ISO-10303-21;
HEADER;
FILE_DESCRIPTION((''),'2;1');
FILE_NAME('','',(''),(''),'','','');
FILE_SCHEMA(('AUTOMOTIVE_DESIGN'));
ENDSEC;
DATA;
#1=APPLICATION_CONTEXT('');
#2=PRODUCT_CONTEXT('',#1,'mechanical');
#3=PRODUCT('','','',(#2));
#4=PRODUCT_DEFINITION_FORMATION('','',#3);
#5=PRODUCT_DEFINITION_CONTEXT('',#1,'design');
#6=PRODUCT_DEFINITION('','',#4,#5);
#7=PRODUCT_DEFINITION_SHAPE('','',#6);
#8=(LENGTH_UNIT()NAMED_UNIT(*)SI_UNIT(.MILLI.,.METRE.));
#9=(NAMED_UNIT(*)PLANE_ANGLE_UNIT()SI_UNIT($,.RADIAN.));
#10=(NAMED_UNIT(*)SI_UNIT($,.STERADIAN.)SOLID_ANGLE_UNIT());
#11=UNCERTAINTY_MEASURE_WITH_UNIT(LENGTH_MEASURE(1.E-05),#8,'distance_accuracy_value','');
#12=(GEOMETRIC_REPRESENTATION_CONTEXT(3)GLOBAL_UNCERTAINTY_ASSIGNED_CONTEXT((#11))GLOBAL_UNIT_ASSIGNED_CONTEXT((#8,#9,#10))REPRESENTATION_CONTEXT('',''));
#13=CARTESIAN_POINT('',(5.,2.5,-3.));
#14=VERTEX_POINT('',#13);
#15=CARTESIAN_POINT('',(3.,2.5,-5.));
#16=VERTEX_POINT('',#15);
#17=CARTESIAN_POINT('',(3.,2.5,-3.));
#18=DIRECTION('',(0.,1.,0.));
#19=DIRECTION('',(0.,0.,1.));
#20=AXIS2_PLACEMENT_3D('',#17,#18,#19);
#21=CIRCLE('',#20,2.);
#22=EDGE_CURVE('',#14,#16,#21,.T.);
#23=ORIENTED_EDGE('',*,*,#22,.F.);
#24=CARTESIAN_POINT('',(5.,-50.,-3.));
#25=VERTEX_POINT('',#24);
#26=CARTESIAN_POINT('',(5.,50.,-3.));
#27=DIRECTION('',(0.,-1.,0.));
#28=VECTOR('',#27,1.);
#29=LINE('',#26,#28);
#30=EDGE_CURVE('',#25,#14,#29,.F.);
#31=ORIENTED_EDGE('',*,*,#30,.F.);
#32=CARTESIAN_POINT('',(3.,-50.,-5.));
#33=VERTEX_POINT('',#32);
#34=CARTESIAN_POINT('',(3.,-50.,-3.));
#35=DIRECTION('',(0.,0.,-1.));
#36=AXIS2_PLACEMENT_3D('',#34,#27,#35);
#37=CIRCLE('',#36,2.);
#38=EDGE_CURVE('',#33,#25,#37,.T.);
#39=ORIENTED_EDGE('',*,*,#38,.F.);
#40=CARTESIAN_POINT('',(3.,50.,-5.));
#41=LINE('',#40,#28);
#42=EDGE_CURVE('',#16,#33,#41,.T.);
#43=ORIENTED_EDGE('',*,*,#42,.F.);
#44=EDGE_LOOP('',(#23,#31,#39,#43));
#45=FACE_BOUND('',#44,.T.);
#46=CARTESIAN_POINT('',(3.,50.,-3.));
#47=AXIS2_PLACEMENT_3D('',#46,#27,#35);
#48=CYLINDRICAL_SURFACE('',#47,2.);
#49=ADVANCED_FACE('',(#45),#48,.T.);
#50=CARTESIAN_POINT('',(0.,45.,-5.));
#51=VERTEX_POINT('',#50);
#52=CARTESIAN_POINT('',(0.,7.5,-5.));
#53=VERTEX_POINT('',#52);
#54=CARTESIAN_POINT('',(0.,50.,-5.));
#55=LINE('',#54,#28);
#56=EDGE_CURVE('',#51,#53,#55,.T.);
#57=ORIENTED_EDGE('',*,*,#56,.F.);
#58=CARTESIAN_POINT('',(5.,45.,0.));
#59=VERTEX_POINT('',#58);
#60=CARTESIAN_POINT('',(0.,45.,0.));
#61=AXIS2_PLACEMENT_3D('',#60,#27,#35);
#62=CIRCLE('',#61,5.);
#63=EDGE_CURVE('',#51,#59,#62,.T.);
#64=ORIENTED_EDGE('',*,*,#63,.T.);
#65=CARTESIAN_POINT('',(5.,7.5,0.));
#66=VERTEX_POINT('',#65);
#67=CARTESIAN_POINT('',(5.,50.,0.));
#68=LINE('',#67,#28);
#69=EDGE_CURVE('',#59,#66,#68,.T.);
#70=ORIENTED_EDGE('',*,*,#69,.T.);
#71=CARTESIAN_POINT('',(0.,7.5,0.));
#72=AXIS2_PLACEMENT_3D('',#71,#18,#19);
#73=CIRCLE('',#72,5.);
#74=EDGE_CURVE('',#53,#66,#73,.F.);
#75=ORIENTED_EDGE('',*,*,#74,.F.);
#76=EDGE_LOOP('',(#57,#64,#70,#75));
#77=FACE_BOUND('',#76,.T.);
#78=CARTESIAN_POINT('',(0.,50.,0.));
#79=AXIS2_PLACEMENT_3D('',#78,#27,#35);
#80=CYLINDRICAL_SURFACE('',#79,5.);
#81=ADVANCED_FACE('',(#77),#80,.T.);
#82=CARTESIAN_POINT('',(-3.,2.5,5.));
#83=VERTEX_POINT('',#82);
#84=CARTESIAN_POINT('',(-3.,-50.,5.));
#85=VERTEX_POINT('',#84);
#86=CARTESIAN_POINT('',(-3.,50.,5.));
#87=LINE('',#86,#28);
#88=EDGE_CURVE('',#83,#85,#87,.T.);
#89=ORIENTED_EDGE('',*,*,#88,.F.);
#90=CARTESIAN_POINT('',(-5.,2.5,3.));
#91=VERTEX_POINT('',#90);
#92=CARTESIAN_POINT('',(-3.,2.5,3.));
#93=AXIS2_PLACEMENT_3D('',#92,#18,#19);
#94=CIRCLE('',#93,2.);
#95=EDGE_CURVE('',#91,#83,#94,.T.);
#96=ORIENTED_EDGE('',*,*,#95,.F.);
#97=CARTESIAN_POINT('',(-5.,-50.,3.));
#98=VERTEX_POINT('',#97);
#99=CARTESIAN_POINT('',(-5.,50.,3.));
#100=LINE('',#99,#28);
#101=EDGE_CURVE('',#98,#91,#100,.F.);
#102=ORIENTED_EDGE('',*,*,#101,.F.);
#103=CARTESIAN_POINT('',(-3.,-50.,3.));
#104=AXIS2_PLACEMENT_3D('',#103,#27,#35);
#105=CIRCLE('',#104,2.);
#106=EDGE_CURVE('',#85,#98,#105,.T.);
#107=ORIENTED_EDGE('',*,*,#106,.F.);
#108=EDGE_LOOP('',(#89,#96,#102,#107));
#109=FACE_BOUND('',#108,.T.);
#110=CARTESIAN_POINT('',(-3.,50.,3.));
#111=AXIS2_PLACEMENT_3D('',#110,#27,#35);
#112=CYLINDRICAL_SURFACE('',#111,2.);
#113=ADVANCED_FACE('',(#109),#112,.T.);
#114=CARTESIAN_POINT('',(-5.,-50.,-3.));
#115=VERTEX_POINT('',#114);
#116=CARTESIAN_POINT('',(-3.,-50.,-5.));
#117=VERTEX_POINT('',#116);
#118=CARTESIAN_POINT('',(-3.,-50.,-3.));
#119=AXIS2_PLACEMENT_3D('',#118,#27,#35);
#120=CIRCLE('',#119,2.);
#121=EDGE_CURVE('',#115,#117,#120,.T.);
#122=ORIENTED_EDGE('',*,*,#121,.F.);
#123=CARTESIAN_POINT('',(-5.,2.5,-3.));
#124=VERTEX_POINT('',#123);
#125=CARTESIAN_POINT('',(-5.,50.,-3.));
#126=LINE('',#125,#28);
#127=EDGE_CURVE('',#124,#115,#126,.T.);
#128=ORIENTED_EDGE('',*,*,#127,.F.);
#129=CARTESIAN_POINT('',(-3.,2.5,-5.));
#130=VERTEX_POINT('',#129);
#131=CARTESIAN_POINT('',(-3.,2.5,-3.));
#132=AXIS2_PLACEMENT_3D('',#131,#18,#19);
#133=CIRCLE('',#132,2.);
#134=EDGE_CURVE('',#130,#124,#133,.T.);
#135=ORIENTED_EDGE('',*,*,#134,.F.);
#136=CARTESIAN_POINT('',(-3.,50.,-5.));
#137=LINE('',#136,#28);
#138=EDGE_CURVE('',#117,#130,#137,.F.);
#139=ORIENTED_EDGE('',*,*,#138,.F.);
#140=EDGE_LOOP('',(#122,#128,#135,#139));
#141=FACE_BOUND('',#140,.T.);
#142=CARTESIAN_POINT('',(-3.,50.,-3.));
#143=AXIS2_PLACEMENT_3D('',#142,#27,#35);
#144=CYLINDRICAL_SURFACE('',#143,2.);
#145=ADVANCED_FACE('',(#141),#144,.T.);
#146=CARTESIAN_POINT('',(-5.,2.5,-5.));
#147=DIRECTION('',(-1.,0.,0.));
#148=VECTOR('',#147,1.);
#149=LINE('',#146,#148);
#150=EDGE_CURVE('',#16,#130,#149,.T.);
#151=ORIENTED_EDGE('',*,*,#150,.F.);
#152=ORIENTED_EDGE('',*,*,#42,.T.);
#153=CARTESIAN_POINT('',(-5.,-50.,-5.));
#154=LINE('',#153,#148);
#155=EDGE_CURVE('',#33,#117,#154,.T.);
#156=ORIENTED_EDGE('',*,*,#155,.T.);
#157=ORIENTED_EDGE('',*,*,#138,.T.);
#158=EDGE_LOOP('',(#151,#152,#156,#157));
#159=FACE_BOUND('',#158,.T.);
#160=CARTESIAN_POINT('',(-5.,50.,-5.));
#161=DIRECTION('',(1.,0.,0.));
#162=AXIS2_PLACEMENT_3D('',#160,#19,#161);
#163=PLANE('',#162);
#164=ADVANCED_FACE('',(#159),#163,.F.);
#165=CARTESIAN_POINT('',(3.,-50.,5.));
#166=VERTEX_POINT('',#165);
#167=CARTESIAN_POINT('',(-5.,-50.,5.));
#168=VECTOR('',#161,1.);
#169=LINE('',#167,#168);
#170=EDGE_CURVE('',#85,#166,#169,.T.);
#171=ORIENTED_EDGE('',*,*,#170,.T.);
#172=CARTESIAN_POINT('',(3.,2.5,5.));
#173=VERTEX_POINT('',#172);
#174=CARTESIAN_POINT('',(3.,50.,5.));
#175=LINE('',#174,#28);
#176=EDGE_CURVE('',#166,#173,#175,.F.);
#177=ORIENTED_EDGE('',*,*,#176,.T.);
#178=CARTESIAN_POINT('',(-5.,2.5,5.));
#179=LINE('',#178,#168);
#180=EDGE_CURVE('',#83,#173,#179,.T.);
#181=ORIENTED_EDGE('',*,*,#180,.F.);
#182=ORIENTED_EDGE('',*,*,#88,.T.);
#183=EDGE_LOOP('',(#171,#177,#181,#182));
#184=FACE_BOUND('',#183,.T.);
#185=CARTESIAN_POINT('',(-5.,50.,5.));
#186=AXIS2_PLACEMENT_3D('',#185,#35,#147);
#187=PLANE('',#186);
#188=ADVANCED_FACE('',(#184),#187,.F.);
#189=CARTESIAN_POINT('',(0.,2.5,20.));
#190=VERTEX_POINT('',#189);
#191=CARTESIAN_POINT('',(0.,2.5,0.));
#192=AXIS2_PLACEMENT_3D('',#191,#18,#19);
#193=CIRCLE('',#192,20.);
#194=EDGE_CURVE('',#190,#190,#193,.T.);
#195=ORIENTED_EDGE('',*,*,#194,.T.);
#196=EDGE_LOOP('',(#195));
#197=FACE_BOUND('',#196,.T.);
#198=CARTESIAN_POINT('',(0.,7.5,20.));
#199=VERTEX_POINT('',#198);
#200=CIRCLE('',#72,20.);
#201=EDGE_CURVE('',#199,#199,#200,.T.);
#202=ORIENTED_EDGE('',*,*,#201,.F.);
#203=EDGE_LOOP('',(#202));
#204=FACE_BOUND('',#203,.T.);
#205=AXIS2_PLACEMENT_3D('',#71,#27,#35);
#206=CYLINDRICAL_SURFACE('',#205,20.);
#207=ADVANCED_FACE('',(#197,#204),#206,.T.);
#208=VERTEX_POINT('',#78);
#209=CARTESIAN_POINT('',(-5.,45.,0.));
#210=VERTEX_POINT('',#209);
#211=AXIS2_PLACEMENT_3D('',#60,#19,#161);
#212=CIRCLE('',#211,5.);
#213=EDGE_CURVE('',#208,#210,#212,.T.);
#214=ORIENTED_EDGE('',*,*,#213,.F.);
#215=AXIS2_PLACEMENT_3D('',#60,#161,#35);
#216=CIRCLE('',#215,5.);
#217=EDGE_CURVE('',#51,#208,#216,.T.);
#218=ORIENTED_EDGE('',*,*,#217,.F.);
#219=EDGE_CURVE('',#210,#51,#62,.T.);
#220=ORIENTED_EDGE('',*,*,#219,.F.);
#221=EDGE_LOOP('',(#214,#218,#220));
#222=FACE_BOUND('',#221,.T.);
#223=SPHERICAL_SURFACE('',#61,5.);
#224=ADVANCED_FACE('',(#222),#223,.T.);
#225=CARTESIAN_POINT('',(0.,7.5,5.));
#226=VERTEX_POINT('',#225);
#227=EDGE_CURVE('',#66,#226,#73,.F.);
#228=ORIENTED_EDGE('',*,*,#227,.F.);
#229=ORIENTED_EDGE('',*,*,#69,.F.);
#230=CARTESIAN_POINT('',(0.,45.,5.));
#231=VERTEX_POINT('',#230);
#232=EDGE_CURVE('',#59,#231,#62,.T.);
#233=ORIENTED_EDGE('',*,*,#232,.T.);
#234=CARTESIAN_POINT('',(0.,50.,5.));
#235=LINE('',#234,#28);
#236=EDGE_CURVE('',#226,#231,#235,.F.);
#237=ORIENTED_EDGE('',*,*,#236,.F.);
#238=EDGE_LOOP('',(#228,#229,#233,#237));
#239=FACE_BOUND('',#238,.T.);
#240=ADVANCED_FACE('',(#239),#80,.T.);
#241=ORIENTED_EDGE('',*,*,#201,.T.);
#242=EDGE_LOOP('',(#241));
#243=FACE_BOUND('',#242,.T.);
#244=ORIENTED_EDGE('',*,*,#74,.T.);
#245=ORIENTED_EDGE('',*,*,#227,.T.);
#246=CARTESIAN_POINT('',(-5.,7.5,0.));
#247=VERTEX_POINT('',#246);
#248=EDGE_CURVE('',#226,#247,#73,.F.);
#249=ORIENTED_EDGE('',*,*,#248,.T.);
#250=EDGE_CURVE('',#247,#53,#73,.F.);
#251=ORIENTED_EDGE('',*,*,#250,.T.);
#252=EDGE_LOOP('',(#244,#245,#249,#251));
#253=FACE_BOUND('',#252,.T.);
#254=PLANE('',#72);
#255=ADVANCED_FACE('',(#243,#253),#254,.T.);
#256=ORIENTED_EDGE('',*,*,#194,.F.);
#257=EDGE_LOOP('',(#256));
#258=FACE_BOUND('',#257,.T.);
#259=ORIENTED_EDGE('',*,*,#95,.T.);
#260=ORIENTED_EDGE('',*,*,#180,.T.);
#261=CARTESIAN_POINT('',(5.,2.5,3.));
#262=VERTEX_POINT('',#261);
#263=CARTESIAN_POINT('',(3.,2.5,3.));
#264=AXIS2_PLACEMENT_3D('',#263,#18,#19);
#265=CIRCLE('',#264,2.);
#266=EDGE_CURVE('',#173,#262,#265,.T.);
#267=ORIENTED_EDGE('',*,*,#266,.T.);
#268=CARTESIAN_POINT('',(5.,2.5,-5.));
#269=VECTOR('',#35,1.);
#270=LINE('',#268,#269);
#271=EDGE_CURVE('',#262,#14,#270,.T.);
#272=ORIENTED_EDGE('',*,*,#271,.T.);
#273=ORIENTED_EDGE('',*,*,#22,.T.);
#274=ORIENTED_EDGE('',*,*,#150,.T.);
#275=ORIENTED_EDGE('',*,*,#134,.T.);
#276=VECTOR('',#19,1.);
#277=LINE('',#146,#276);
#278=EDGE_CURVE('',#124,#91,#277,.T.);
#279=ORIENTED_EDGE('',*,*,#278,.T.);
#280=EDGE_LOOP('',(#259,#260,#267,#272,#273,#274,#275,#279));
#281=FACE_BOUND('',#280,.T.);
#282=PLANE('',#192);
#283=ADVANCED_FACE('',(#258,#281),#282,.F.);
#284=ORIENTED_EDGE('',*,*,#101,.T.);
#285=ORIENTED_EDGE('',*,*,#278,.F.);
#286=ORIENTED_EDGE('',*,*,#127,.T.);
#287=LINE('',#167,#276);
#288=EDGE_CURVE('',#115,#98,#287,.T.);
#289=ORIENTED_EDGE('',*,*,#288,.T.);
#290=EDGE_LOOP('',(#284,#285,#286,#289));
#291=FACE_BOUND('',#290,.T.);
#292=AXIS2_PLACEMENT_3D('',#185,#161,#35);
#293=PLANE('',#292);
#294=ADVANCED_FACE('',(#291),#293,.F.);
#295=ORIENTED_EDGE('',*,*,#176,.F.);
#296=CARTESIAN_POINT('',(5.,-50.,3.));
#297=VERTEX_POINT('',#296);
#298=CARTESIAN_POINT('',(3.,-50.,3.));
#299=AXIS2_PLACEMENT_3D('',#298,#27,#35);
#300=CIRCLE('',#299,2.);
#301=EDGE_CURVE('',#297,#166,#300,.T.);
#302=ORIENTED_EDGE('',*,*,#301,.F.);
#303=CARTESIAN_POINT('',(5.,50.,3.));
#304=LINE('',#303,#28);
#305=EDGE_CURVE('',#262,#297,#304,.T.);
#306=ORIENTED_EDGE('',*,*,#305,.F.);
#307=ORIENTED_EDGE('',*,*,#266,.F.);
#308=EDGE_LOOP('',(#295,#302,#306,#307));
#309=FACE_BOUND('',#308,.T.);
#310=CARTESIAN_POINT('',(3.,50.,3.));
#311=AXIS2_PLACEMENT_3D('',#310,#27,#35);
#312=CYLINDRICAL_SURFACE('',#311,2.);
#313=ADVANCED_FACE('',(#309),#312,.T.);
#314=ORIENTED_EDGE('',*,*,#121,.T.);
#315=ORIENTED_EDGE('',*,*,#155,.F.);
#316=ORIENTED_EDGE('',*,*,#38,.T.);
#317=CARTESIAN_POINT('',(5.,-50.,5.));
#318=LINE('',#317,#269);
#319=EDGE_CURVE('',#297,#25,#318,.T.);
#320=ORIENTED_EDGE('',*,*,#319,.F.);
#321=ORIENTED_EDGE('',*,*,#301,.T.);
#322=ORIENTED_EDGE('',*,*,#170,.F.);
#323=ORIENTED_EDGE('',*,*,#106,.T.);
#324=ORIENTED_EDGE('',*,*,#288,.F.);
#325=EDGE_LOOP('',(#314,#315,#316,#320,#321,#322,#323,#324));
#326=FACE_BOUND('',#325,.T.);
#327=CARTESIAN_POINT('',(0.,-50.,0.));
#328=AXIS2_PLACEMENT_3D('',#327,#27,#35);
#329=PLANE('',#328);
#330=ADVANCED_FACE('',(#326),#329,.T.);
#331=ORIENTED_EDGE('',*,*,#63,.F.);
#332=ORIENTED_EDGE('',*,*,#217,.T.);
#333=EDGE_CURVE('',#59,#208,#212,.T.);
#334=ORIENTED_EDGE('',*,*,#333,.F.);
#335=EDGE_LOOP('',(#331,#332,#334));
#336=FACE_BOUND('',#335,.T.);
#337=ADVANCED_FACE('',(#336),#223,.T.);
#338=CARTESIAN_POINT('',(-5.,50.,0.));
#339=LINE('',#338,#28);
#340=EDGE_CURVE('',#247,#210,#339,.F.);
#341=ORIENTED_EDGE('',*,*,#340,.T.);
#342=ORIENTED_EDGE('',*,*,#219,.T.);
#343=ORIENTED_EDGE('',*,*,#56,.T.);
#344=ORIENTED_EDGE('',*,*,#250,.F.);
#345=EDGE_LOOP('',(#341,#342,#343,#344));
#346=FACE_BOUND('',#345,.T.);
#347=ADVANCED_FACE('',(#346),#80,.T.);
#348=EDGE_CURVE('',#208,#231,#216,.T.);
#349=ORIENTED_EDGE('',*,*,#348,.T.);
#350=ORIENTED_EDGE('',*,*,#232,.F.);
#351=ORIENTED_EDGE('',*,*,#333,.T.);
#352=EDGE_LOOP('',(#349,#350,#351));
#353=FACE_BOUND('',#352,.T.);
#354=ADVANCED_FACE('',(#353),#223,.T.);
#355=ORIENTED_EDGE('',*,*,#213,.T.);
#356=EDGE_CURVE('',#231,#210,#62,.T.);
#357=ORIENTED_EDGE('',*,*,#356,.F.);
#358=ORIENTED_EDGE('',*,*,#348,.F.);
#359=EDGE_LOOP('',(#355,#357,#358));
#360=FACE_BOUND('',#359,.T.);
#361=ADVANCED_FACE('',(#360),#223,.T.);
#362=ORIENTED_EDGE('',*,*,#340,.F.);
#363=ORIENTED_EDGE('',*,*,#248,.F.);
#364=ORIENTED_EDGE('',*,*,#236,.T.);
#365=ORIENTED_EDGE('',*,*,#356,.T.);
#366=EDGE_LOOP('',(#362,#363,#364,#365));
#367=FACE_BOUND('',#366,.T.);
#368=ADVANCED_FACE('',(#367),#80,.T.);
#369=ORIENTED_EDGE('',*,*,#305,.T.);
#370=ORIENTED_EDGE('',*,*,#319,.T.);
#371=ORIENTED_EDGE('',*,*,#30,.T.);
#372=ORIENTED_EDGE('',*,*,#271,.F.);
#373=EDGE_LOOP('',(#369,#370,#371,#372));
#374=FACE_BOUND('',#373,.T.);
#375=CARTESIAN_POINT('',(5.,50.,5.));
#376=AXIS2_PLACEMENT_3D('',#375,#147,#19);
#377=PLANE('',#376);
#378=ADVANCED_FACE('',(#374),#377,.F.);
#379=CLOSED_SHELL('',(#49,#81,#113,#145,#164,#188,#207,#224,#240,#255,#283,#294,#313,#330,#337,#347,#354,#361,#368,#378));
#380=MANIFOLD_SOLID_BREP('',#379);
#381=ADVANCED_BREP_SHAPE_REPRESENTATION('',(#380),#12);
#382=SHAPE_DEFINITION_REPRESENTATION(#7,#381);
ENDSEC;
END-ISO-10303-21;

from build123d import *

# Parameters (mm, degrees)
SKETCH1_W           = 10
SKETCH1_H           = 10
BOSS_EXTRUDE1_DEPTH = 50
BOSS_EXTRUDE2_START = -45
SKETCH2_R           = 20
BOSS_EXTRUDE2_DEPTH = 2.5
FILLET2_R           = 2
FILLET3_R           = 5
FILLET4_R           = 5


with BuildPart() as part:
    # Sketch1 → Boss-Extrude1 (new, symmetric)
    with BuildSketch(Plane(origin=(0, 0, 0), x_dir=(1, 0, 0), z_dir=(0, 1, 0))):
        Rectangle(SKETCH1_W, SKETCH1_H)
    extrude(amount=BOSS_EXTRUDE1_DEPTH, both=True)

    # Sketch2 → Boss-Extrude2 (add, symmetric)
    with BuildSketch(Plane(origin=(0, 50, 0), x_dir=(1, 0, 0), z_dir=(0, 1, 0)).offset(BOSS_EXTRUDE2_START)):
        with Locations(Location((0, 0, 0), (0, 0, 270))):
            Circle(SKETCH2_R)
    extrude(amount=BOSS_EXTRUDE2_DEPTH, both=True)

    # Fillet2
    fillet2_edges = [part.edges().sort_by_distance(p)[0] for p in [
        (5, -23.75, 5),
        (-5, -23.75, 5),
        (-5, -23.75, -5),
        (5, -23.75, -5),
    ]]
    fillet(fillet2_edges, radius=FILLET2_R)

    # Fillet3
    fillet3_edges = [part.edges().sort_by_distance(p)[0] for p in [
        (-5, 28.75, -5),
        (-5, 28.75, 5),
        (5, 28.75, 5),
        (5, 28.75, -5),
    ]]
    fillet(fillet3_edges, radius=FILLET3_R - 0.0001)  # a hair under: the kernel refuses the full size

    # Fillet4
    fillet4_edges = [part.edges().sort_by_distance(p)[0] for p in [
        (3.535563195, 50, -3.535563195),
        (3.535563195, 50, 3.535563195),
        (-3.535563195, 50, 3.535563195),
        (-3.535563195, 50, -3.535563195),
    ]]
    fillet(fillet4_edges, radius=FILLET4_R - 0.0001)  # a hair under: the kernel refuses the full size


solid = part.part
